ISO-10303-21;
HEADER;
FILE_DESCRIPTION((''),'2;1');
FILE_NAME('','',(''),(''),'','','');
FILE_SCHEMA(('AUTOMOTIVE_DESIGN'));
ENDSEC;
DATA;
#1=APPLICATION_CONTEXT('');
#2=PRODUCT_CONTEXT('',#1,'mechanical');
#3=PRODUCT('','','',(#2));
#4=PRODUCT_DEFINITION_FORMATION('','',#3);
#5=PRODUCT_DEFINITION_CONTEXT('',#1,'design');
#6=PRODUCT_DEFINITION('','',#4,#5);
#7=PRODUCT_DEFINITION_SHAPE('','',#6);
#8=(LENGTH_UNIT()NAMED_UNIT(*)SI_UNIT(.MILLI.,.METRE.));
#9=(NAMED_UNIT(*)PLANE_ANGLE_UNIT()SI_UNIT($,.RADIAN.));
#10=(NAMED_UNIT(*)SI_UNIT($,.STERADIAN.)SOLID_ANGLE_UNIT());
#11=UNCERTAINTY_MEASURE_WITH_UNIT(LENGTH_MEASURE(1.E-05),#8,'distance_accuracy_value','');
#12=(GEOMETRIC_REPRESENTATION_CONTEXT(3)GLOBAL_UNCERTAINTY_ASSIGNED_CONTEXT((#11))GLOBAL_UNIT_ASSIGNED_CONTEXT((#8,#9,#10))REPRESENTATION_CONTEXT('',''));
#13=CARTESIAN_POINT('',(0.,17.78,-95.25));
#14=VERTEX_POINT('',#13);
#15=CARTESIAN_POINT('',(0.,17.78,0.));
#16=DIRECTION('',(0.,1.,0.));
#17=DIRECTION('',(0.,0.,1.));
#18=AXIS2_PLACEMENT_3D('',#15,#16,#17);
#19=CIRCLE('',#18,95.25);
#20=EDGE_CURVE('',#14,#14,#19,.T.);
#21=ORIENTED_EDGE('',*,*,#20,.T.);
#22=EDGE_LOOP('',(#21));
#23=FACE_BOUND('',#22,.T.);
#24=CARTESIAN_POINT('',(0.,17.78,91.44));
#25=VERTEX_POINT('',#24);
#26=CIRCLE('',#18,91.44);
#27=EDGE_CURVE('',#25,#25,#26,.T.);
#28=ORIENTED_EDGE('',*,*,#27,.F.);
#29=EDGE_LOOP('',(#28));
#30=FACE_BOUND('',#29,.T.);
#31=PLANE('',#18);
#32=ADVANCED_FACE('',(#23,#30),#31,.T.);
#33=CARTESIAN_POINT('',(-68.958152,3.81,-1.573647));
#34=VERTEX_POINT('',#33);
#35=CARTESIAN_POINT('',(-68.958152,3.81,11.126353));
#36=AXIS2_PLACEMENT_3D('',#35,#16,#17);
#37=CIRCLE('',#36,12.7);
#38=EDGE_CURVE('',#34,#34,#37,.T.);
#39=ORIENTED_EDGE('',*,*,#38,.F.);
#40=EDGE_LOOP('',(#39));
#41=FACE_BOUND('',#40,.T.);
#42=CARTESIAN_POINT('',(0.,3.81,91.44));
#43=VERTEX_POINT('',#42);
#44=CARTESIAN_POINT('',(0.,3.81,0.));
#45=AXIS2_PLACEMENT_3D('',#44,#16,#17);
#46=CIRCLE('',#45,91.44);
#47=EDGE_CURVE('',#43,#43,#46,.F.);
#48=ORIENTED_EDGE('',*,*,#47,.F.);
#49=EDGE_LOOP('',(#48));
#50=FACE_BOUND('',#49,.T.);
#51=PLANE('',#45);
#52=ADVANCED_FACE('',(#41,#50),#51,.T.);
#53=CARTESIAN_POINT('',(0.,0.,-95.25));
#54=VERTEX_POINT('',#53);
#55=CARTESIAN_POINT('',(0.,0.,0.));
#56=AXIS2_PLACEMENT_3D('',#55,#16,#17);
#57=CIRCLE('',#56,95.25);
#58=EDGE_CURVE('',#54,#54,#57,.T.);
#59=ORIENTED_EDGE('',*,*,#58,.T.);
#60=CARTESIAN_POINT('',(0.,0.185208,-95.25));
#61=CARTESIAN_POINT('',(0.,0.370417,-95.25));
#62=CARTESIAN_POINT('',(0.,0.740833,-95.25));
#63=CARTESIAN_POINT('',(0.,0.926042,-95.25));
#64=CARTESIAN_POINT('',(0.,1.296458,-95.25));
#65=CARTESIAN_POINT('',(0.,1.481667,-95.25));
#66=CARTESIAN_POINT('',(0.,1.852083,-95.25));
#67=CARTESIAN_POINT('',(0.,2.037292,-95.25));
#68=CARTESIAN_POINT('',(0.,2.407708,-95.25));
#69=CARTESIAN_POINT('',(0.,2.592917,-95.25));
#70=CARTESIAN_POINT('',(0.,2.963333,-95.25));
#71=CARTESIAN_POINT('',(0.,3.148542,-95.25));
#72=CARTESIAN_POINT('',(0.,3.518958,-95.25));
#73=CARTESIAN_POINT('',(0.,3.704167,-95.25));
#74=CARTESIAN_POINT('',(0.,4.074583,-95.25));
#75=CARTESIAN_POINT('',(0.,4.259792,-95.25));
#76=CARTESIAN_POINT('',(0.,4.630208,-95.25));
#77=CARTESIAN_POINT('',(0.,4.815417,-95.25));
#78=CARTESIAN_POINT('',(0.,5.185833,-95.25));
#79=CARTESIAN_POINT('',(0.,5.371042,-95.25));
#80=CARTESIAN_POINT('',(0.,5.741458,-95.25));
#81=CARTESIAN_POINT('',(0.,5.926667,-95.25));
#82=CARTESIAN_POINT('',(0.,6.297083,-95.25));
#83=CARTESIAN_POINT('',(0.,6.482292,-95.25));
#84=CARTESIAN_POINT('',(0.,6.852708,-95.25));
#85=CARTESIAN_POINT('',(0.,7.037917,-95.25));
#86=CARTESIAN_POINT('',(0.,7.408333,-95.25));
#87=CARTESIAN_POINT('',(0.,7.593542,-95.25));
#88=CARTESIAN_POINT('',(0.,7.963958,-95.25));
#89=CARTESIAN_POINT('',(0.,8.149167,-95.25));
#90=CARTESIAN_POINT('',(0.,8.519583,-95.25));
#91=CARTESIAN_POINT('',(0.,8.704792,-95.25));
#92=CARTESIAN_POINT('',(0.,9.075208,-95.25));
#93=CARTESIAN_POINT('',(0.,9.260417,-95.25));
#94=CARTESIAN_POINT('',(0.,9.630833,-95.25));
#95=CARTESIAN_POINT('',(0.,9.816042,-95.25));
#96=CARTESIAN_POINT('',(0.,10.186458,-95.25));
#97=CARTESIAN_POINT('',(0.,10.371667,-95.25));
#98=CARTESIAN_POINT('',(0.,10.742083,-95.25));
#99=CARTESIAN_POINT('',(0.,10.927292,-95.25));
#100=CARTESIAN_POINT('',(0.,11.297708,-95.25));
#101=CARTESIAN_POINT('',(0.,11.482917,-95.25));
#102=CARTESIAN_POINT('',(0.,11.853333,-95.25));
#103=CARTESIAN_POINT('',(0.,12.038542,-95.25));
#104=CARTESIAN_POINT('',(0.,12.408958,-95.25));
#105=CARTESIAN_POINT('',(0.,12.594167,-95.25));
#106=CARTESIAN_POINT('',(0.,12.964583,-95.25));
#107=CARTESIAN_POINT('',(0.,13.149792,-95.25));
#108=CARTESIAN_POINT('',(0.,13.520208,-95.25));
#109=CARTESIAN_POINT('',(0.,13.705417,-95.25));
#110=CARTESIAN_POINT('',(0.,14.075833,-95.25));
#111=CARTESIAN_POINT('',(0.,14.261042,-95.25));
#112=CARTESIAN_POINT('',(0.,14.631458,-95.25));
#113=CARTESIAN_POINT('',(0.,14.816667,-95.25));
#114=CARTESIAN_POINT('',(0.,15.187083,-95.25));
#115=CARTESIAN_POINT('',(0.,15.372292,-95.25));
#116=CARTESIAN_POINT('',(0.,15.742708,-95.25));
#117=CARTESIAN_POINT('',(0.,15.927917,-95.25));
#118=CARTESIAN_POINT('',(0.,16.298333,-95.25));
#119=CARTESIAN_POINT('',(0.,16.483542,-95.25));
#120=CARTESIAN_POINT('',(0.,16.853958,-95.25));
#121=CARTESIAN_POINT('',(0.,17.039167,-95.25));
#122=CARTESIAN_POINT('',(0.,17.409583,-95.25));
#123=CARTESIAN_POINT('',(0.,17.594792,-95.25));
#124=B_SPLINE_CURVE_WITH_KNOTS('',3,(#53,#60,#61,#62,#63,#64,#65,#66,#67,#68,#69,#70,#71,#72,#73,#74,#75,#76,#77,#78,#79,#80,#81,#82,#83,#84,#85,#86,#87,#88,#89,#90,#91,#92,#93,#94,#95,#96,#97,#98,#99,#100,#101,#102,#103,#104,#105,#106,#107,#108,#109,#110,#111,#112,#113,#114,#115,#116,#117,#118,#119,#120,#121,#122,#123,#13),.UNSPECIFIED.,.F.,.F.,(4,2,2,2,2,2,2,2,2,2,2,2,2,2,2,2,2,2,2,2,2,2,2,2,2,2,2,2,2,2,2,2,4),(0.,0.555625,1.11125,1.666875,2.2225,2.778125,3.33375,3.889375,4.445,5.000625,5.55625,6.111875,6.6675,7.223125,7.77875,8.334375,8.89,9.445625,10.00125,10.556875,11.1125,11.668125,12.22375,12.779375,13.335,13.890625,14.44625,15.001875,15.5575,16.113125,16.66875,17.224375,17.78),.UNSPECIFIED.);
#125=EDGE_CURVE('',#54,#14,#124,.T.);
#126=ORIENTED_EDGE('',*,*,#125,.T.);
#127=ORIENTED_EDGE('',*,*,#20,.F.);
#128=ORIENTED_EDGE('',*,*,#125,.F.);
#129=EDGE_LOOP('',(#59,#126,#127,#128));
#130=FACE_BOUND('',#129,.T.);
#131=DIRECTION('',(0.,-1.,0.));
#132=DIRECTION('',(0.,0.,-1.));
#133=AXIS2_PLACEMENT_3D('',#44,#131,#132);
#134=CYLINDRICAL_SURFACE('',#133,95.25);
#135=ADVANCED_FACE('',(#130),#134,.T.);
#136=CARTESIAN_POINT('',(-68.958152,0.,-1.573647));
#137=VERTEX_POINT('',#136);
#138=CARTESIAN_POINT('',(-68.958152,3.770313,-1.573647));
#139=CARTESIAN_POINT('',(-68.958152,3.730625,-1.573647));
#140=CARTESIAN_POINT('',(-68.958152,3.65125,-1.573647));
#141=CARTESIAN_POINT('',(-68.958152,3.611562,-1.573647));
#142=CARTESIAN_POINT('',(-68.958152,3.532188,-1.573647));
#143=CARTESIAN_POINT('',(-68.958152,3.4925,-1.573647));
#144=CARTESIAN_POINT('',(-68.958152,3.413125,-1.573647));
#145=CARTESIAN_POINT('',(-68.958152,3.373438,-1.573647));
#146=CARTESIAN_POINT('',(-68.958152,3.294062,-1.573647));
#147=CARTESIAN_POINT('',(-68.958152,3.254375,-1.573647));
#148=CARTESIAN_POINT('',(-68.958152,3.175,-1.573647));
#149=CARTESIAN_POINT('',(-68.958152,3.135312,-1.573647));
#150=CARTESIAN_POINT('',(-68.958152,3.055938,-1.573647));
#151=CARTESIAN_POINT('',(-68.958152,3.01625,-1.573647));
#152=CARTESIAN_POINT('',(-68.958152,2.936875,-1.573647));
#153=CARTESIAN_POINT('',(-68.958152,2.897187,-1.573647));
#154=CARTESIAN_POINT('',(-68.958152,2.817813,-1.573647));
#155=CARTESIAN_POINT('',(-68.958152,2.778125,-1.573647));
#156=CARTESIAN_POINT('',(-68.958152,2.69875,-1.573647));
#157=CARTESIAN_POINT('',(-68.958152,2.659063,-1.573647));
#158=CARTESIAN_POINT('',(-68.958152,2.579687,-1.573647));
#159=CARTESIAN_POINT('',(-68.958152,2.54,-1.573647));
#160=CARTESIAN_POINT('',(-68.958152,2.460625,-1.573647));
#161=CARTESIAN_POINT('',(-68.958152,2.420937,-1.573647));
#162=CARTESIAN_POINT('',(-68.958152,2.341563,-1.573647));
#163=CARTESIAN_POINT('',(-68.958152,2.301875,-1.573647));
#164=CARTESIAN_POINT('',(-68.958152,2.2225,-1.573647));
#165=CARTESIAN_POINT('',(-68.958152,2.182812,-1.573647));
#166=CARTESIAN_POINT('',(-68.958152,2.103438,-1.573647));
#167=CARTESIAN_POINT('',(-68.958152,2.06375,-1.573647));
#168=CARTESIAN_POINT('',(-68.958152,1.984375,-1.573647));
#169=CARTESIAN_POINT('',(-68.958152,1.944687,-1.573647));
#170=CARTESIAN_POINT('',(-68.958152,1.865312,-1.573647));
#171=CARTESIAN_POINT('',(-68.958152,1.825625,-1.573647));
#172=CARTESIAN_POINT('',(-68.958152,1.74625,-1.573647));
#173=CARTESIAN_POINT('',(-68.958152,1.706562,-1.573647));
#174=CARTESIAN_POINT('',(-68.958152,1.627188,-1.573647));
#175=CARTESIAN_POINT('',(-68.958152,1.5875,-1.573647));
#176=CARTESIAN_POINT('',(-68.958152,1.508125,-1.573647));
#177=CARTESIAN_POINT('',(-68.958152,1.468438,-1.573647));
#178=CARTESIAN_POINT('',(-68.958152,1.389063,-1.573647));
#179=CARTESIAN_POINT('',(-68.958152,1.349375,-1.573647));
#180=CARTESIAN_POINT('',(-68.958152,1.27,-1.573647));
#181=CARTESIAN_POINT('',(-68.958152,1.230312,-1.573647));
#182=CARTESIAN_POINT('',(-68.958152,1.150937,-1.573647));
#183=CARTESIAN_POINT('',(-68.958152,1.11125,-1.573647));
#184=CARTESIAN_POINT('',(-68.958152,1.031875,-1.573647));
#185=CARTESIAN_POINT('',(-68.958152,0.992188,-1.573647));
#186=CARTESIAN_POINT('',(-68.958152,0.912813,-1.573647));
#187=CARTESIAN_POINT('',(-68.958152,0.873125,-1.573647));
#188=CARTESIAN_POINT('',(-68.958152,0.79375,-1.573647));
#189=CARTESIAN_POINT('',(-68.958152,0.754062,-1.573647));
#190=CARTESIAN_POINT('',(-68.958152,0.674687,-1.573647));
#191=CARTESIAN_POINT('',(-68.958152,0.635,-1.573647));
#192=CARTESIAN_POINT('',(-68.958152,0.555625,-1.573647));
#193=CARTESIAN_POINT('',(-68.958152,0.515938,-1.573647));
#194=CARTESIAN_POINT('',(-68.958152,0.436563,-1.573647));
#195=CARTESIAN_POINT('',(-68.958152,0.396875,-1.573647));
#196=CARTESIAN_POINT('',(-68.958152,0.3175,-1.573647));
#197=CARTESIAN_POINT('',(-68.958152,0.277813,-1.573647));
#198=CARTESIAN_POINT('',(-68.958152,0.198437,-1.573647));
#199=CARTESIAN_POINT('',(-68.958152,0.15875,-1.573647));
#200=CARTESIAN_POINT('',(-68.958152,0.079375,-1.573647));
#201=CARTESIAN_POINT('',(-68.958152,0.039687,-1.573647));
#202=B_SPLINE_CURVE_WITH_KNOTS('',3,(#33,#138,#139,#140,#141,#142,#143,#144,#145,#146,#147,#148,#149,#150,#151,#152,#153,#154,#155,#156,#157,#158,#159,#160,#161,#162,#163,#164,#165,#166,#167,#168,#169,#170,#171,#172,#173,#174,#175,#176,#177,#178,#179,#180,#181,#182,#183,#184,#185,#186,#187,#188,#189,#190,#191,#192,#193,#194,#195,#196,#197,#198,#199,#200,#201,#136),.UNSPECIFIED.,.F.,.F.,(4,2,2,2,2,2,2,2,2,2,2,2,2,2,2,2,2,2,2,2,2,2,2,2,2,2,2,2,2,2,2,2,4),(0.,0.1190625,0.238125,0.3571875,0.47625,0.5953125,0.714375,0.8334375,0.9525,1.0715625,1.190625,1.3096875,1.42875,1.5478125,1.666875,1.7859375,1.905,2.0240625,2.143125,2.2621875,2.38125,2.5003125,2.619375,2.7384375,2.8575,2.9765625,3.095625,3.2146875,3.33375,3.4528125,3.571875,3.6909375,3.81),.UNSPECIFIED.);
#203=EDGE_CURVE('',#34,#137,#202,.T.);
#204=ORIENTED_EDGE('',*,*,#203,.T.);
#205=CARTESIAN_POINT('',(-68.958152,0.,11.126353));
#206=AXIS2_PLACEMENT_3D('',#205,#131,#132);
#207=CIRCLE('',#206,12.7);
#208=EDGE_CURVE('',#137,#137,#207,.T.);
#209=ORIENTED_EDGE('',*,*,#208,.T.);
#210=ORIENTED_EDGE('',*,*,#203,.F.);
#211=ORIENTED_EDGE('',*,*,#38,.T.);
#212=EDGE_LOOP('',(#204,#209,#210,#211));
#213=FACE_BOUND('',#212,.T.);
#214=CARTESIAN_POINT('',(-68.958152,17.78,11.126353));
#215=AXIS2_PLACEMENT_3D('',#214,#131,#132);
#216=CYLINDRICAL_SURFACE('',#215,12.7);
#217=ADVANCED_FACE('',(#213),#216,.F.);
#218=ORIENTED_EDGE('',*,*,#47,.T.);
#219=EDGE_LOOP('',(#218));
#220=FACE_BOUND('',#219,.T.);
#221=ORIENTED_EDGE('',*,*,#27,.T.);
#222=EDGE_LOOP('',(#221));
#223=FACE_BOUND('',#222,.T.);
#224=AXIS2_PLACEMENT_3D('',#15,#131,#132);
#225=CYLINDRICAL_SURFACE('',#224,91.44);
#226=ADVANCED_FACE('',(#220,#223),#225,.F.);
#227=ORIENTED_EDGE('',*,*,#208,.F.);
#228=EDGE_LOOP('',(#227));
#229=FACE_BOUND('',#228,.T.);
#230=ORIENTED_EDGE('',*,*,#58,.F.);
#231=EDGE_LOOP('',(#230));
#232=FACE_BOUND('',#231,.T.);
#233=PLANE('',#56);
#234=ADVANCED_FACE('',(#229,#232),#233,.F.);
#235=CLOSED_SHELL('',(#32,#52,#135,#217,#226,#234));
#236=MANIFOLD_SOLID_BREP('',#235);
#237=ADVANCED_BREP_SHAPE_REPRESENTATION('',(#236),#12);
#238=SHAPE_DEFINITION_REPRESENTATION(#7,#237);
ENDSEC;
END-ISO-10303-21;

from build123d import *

# Parameters (mm, degrees)
SKETCH1_R           = 95.25
BOSS_EXTRUDE1_DEPTH = 3.81
SKETCH2_R           = 95.25
SKETCH2_R_2         = 91.44
BOSS_EXTRUDE2_DEPTH = 13.97
HOLE1_OUTLINE_R     = 12.7
HOLE1_DEPTH         = 3.81


# Read off the part's stored shape, not the designer's step: Hole1
with BuildPart() as part:
    # Sketch1 → Boss-Extrude1 (new body)
    with BuildSketch(Plane(origin=(0, 0, 0), x_dir=(1, 0, 0), z_dir=(0, 1, 0))):
        with Locations(Location((0, 0, 0), (0, 0, 90))):
            Circle(SKETCH1_R)
    extrude(amount=BOSS_EXTRUDE1_DEPTH)

    # Sketch2 → Boss-Extrude2 (add)
    with BuildSketch(Plane(origin=(0, 3.81, 0), x_dir=(1, 0, 0), z_dir=(0, 1, 0))):
        with Locations(Location((0, 0, 0), (0, 0, 90))):
            Circle(SKETCH2_R)
        with Locations(Location((0, 0, 0), (0, 0, 270))):
            Circle(SKETCH2_R_2, mode=Mode.SUBTRACT)
    extrude(amount=BOSS_EXTRUDE2_DEPTH)

    # Hole1 outline → Hole1 (cut)
    with BuildSketch(Plane(origin=(0, 0, 0), x_dir=(1, 0, 0), z_dir=(0, 1, 0))):
        with Locations((-68.958152294, -11.126353047)):
            Circle(HOLE1_OUTLINE_R)
    extrude(amount=HOLE1_DEPTH, mode=Mode.SUBTRACT)


solid = part.part
